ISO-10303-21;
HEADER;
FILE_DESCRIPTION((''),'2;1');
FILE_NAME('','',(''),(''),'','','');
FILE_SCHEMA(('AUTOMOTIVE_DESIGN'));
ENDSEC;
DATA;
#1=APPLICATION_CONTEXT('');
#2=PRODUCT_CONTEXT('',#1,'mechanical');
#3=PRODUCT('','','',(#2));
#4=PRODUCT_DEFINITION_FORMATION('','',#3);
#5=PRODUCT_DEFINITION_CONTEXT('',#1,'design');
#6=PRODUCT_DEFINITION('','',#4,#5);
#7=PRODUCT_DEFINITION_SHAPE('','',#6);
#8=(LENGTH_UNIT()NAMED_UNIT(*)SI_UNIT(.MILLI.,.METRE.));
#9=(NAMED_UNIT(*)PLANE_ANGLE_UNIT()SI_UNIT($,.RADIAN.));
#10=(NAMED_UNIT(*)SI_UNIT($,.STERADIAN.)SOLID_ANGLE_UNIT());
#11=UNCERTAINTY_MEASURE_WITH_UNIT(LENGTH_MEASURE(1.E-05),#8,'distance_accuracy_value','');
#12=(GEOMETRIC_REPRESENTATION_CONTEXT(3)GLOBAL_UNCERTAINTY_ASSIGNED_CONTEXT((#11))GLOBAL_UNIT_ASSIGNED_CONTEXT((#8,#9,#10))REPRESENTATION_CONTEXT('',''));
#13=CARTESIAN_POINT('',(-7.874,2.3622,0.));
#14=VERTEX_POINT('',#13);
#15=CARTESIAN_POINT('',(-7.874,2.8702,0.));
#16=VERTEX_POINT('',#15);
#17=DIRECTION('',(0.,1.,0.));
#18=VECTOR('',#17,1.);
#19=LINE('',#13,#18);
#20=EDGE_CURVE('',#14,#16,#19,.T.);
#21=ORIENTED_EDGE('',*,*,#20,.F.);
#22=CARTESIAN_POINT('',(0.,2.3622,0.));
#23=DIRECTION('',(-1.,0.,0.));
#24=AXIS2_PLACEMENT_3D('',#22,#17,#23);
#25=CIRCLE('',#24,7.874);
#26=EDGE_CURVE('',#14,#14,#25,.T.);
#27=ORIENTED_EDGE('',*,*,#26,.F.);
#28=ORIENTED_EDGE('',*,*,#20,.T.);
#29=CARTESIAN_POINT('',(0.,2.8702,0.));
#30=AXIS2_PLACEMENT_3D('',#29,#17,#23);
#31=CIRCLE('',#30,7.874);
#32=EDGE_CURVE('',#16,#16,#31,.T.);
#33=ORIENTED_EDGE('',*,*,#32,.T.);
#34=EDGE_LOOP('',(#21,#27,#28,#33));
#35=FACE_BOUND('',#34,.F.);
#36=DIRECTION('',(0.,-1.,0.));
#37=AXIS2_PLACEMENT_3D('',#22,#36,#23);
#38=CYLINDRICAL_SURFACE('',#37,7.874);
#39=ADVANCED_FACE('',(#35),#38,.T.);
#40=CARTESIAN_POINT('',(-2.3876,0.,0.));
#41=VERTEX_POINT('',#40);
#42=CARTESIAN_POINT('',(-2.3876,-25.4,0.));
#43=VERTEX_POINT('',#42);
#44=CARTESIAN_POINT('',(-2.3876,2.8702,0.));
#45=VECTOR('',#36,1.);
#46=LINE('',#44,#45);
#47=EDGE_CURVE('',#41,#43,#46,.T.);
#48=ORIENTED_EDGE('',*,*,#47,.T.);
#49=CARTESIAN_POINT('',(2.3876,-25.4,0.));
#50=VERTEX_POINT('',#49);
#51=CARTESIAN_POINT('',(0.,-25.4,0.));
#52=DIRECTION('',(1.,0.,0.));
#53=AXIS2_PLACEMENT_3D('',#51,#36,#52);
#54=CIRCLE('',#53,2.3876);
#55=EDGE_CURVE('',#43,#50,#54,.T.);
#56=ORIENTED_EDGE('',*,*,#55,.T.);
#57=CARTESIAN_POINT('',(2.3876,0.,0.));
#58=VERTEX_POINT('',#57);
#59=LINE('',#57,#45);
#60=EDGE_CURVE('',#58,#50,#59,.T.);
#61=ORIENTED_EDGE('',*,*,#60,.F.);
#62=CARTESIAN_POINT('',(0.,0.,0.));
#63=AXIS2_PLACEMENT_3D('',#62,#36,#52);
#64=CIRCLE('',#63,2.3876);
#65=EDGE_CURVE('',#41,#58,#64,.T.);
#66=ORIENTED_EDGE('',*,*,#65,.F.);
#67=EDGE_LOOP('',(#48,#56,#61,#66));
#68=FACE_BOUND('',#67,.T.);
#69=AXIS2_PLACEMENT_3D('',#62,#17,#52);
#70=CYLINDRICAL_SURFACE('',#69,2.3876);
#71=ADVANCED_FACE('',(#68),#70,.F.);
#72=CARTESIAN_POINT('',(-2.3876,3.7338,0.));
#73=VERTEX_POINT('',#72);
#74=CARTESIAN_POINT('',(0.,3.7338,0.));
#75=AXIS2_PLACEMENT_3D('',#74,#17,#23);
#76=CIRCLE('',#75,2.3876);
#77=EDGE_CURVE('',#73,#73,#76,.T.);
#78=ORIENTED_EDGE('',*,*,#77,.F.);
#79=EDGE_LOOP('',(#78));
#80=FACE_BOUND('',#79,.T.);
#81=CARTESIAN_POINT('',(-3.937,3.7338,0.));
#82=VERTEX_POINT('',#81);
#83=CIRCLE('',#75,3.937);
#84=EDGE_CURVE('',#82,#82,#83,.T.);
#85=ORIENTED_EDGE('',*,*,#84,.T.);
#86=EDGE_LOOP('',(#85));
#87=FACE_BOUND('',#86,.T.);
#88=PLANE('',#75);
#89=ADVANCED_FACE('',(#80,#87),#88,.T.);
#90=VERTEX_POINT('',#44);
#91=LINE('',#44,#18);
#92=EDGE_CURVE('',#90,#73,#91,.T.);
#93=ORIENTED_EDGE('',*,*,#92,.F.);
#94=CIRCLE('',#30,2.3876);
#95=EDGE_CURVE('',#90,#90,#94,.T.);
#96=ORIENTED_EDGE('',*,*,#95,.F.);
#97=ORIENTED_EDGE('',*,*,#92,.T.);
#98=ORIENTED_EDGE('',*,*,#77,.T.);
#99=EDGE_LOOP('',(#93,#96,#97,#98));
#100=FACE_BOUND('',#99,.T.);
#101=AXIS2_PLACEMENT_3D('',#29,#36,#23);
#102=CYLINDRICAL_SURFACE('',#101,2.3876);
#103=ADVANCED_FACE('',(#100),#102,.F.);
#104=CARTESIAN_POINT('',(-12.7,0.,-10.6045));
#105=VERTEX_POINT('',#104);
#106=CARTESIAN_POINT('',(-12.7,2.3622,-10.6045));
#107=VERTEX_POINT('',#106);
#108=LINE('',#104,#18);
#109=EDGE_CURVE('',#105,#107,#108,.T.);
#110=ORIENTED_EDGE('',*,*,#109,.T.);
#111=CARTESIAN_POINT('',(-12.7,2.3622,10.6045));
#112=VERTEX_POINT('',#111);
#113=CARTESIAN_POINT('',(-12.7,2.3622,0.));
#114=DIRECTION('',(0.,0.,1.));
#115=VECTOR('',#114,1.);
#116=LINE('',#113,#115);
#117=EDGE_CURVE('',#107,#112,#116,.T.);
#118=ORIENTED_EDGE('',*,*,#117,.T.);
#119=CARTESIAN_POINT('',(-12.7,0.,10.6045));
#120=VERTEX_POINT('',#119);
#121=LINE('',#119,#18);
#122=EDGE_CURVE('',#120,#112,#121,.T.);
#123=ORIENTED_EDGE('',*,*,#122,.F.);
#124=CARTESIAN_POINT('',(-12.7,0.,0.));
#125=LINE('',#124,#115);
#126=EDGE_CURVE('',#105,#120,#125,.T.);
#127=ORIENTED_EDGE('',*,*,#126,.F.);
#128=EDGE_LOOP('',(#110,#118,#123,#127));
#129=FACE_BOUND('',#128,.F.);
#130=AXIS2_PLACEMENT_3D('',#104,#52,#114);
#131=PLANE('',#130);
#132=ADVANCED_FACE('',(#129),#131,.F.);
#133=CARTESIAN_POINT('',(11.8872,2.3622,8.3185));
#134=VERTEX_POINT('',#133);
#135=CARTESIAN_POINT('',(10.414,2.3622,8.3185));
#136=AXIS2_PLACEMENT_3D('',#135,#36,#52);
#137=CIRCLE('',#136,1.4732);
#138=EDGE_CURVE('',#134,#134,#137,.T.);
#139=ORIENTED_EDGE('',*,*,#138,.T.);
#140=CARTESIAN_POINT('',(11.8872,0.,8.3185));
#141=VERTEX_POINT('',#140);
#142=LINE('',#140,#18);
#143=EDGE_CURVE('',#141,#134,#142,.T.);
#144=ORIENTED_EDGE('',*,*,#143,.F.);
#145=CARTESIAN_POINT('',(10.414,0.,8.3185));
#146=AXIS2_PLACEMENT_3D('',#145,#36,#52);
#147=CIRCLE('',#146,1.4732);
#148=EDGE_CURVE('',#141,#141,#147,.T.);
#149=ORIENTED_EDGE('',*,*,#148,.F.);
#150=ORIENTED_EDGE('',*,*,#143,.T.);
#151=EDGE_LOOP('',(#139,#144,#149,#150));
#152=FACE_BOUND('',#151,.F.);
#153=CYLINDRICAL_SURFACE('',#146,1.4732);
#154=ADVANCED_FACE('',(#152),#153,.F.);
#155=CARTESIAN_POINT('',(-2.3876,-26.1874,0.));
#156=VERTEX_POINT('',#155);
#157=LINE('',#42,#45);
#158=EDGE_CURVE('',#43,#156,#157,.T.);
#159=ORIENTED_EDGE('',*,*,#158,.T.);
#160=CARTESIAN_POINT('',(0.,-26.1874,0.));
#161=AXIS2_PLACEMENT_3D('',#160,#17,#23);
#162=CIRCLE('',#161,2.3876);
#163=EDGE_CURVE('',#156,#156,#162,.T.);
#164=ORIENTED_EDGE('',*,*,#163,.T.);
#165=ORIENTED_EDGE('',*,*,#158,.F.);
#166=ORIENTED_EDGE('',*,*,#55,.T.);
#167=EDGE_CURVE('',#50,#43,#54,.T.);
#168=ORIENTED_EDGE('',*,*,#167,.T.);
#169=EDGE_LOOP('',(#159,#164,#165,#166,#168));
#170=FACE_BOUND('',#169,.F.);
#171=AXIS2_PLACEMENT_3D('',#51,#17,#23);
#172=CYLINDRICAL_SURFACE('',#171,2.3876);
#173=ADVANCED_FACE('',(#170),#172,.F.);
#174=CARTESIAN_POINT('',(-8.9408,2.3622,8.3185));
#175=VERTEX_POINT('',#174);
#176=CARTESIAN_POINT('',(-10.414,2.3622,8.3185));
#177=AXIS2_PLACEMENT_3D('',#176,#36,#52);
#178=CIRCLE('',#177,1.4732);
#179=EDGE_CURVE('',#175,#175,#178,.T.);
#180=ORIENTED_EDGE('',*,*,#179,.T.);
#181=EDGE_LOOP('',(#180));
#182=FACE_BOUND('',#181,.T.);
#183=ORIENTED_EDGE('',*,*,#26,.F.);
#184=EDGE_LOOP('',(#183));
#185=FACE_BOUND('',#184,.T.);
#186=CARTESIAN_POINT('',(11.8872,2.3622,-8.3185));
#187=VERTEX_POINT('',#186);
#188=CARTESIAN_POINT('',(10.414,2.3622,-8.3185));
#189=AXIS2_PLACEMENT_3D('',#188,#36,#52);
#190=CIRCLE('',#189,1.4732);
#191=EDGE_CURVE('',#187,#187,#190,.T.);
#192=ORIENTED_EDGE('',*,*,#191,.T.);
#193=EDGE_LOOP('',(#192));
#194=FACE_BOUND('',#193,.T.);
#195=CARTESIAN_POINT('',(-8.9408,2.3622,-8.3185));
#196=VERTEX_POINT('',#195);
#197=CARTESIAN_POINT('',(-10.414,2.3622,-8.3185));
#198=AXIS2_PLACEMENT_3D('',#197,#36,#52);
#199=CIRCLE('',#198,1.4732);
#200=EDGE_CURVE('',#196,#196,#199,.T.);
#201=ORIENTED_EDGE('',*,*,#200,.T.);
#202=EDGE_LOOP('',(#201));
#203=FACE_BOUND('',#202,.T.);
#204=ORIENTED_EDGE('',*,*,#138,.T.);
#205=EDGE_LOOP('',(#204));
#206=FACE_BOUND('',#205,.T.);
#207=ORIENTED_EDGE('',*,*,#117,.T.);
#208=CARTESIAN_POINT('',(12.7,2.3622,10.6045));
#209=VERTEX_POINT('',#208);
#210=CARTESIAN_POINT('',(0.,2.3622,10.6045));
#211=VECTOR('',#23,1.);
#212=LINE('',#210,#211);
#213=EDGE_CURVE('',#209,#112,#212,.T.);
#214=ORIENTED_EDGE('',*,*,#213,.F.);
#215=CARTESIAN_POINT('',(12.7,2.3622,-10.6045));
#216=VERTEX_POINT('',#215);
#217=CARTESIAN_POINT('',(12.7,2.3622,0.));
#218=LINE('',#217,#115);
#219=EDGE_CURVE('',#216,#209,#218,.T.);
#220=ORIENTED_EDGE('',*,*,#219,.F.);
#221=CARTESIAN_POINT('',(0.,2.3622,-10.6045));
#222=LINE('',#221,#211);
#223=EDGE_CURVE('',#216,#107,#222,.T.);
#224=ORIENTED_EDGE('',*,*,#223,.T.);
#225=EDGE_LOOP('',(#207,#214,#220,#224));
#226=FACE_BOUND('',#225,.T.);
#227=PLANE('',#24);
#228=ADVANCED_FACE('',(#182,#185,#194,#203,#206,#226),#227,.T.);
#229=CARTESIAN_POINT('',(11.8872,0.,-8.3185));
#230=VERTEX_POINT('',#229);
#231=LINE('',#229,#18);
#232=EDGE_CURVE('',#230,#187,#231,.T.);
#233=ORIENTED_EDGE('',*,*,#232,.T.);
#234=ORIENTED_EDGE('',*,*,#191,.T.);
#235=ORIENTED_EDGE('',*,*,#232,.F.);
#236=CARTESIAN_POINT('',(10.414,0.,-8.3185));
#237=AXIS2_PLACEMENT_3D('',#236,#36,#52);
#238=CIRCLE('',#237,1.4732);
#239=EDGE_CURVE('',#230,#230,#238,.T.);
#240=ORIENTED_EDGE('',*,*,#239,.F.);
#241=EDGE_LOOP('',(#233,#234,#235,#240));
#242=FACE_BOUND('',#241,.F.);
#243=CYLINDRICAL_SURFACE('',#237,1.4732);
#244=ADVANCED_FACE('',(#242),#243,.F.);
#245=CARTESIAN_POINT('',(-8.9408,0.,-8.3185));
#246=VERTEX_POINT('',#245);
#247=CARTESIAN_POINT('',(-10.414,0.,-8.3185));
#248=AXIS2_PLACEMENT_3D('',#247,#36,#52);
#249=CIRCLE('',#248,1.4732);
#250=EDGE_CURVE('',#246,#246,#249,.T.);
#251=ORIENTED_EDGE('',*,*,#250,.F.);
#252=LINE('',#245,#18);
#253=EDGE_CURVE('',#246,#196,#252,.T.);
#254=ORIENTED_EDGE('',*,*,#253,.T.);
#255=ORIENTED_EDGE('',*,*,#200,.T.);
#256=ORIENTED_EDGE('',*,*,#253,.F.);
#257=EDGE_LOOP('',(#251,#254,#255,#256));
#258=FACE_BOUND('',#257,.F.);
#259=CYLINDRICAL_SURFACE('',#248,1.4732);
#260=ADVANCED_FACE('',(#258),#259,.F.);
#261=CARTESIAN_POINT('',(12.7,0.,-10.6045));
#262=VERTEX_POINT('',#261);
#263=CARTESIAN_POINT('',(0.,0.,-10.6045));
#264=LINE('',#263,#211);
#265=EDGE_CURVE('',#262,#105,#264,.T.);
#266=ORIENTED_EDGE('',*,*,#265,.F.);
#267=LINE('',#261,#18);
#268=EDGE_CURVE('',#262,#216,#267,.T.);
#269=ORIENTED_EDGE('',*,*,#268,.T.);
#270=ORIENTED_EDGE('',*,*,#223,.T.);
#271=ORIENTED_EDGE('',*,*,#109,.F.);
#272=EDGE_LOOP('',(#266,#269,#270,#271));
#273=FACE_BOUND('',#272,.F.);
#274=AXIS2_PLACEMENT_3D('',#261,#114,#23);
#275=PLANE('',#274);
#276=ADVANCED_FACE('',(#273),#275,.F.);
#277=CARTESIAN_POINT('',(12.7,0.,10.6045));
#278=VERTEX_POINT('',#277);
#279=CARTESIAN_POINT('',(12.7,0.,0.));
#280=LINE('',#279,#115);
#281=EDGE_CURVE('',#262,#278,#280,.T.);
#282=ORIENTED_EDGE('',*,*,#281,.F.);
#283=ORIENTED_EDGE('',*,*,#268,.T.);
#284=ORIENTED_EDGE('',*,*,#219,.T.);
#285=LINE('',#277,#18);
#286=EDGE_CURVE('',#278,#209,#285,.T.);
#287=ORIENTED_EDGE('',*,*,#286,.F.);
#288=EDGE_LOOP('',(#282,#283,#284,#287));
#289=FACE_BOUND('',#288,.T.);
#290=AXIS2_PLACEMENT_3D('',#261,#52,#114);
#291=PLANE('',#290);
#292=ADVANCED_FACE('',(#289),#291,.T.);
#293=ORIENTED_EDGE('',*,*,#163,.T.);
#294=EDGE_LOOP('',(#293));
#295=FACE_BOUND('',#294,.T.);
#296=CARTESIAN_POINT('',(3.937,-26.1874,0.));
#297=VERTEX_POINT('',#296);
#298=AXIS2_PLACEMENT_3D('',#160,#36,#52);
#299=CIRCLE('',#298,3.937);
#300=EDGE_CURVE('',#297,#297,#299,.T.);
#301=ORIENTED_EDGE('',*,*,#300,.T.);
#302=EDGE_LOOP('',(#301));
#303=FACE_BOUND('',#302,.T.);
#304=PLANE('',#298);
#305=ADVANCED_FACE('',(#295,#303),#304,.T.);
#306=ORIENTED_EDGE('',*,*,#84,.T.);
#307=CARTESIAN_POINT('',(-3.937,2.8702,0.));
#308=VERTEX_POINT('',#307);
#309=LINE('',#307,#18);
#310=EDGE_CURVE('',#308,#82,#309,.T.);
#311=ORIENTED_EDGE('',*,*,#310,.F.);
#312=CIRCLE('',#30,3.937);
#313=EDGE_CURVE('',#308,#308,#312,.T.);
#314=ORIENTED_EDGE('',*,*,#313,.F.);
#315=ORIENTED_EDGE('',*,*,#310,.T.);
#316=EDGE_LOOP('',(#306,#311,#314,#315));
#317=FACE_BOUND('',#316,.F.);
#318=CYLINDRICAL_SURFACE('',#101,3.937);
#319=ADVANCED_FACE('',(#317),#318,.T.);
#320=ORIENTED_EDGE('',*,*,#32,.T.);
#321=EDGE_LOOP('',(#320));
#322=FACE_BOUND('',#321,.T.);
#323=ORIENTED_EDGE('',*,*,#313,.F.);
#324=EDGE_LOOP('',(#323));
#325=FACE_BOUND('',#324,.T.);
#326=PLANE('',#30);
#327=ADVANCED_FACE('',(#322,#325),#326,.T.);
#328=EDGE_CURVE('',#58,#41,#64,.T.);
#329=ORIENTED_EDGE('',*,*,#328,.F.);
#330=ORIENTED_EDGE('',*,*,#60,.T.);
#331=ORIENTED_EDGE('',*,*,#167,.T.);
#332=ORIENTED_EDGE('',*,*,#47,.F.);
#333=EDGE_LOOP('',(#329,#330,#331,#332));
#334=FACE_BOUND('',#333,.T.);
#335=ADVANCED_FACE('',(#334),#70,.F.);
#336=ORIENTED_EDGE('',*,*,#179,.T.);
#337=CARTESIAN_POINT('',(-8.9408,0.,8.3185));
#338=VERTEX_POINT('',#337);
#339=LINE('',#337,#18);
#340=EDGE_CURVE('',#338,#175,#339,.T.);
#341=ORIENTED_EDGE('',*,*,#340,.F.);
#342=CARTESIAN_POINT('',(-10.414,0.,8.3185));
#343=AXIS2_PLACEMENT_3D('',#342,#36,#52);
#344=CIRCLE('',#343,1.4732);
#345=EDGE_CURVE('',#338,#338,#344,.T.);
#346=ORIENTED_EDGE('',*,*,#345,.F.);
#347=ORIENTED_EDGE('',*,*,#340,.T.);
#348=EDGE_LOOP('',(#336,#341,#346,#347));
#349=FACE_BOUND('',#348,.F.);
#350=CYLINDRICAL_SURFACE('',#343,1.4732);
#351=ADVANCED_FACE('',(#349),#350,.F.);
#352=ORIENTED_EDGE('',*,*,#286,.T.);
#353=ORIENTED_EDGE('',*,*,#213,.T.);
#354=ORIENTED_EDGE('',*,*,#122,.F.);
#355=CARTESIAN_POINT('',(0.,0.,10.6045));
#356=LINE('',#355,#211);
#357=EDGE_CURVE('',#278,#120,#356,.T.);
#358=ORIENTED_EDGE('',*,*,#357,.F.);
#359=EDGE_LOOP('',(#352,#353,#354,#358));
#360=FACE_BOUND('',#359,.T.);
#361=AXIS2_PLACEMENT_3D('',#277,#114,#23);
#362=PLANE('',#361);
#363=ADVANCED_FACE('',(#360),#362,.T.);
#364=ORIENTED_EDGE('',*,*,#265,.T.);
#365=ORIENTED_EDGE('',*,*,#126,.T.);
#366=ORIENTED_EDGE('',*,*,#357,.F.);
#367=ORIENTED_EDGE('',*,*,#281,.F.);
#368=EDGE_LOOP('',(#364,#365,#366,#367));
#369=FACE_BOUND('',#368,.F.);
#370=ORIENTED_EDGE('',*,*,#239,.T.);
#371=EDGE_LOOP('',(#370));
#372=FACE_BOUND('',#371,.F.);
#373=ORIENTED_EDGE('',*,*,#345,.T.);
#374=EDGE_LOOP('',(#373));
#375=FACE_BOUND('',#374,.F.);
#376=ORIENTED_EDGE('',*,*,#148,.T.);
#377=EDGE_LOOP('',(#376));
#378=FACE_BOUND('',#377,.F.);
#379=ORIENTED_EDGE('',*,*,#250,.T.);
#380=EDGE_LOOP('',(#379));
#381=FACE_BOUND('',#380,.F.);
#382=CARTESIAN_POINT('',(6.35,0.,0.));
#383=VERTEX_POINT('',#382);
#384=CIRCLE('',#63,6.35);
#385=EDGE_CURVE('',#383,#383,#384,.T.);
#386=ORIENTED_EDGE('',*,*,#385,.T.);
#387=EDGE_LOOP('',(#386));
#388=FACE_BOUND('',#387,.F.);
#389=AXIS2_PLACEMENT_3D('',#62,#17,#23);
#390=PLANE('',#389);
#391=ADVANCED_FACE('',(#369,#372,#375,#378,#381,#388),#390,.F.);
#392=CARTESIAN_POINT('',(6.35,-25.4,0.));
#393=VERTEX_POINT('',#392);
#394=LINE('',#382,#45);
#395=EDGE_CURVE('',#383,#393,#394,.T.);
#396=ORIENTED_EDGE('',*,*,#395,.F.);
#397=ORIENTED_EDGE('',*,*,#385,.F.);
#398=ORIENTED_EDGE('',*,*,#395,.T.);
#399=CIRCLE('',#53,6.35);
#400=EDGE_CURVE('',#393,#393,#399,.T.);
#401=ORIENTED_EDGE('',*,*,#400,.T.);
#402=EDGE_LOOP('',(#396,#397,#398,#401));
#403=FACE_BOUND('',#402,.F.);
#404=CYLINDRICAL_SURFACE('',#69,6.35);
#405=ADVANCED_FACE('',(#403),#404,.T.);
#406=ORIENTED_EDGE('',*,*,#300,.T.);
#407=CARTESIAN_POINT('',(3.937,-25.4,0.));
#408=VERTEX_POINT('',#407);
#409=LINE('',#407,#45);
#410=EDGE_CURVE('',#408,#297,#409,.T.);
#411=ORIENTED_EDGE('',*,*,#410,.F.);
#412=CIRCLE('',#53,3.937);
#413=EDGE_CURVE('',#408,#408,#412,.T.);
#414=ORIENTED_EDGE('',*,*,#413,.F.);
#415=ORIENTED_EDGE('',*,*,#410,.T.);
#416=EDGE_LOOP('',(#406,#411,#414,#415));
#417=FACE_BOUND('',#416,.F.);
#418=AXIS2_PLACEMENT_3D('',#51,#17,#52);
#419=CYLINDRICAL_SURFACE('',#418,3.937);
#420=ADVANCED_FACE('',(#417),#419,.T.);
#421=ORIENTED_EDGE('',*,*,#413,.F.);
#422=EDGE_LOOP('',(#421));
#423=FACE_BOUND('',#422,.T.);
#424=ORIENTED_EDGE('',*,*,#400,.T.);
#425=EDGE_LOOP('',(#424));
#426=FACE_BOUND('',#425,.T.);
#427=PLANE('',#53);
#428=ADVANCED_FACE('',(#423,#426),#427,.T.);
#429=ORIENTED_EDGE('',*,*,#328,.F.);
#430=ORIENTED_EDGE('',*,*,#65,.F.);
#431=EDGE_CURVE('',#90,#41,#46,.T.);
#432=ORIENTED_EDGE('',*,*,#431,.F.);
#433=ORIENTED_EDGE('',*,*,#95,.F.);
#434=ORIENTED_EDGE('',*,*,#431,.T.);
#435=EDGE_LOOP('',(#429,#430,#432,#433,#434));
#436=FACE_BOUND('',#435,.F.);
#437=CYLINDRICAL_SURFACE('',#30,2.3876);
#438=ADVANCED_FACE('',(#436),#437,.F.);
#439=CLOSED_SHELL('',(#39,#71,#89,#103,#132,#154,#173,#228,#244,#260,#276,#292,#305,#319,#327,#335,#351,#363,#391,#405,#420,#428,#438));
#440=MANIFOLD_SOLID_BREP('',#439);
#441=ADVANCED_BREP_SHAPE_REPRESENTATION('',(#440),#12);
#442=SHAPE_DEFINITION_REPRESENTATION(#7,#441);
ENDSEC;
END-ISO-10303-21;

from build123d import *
from build123d import SkipClean  # not in build123d's __all__

# Parameters (mm, degrees)
F0_R      = 6.35
F0_R_2    = 2.3876
F1_DEPTH  = 25.4
F2_W      = 25.4
F2_H      = 21.209
F3_DEPTH  = 2.3622
F4_R      = 7.874
F5_DEPTH  = 0.508
F6_R      = 2.3876
F7_DEPTH  = 28.2712
F8_R      = 3.937
F8_R_2    = 2.3876
F9_DEPTH  = 0.8636
F10_R     = 3.937
F11_DEPTH = 0.7874
F12_R     = 1.4732
F13_DEPTH = 3.7348


# Not quite as in the source:
# - after a boolean that leaves OpenCascade's solid faulty, fix() repairs it


with BuildPart() as f1:
    # F0 (on Front) → F1 (new body)
    with BuildSketch(Plane.XZ):
        Circle(F0_R)
        Circle(F0_R_2, mode=Mode.SUBTRACT)
    extrude(amount=F1_DEPTH)

    # F2 (on face) → F3 (join)
    with BuildSketch(Plane(origin=(0, 0, 0), x_dir=(-1, 0, 0), z_dir=(0, 1, 0))):
        Rectangle(F2_W, F2_H)
    extrude(amount=F3_DEPTH)

    # F4 (on face) → F5 (join)
    with BuildSketch(Plane(origin=(0, 2.3622, 0), x_dir=(-1, 0, 0), z_dir=(0, 1, 0))):
        Circle(F4_R)
    extrude(amount=F5_DEPTH)

    # F6 (on face) → F7 (cut, through all)
    with BuildSketch(Plane(origin=(0, 2.8702, 0), x_dir=(-1, 0, 0), z_dir=(0, 1, 0))):
        Circle(F6_R)
    with SkipClean():  # cleaning this boolean's faces spoils the solid; the shape is the same uncleaned
        extrude(amount=-F7_DEPTH, mode=Mode.SUBTRACT)

    # F8 (on face) → F9 (join)
    with BuildSketch(Plane(origin=(0, 2.8702, 0), x_dir=(-1, 0, 0), z_dir=(0, 1, 0))):
        Circle(F8_R)
        Circle(F8_R_2, mode=Mode.SUBTRACT)
    extrude(amount=F9_DEPTH)

    add(f1.part.fix(), mode=Mode.REPLACE)

    # F10 (on face) → F11 (join)
    with BuildSketch(Plane.XZ.offset(25.4)):
        Circle(F10_R)
        with BuildLine():
            ThreePointArc((2.3876, 0), (0, -2.3876), (-2.3876, 0))
            ThreePointArc((-2.3876, 0), (0, 2.3876), (2.3876, 0))
        make_face(mode=Mode.SUBTRACT)
    extrude(amount=F11_DEPTH)

    # F12 (on face) → F13 (cut, through all)
    with BuildSketch(Plane.XZ):
        with Locations((-10.414, 8.3185)):
            Circle(F12_R)
        with Locations((10.414, 8.3185)):
            Circle(F12_R)
        with Locations((-10.414, -8.3185)):
            Circle(F12_R)
        with Locations((10.414, -8.3185)):
            Circle(F12_R)
    extrude(amount=-F13_DEPTH, mode=Mode.SUBTRACT)


solid = f1.part
